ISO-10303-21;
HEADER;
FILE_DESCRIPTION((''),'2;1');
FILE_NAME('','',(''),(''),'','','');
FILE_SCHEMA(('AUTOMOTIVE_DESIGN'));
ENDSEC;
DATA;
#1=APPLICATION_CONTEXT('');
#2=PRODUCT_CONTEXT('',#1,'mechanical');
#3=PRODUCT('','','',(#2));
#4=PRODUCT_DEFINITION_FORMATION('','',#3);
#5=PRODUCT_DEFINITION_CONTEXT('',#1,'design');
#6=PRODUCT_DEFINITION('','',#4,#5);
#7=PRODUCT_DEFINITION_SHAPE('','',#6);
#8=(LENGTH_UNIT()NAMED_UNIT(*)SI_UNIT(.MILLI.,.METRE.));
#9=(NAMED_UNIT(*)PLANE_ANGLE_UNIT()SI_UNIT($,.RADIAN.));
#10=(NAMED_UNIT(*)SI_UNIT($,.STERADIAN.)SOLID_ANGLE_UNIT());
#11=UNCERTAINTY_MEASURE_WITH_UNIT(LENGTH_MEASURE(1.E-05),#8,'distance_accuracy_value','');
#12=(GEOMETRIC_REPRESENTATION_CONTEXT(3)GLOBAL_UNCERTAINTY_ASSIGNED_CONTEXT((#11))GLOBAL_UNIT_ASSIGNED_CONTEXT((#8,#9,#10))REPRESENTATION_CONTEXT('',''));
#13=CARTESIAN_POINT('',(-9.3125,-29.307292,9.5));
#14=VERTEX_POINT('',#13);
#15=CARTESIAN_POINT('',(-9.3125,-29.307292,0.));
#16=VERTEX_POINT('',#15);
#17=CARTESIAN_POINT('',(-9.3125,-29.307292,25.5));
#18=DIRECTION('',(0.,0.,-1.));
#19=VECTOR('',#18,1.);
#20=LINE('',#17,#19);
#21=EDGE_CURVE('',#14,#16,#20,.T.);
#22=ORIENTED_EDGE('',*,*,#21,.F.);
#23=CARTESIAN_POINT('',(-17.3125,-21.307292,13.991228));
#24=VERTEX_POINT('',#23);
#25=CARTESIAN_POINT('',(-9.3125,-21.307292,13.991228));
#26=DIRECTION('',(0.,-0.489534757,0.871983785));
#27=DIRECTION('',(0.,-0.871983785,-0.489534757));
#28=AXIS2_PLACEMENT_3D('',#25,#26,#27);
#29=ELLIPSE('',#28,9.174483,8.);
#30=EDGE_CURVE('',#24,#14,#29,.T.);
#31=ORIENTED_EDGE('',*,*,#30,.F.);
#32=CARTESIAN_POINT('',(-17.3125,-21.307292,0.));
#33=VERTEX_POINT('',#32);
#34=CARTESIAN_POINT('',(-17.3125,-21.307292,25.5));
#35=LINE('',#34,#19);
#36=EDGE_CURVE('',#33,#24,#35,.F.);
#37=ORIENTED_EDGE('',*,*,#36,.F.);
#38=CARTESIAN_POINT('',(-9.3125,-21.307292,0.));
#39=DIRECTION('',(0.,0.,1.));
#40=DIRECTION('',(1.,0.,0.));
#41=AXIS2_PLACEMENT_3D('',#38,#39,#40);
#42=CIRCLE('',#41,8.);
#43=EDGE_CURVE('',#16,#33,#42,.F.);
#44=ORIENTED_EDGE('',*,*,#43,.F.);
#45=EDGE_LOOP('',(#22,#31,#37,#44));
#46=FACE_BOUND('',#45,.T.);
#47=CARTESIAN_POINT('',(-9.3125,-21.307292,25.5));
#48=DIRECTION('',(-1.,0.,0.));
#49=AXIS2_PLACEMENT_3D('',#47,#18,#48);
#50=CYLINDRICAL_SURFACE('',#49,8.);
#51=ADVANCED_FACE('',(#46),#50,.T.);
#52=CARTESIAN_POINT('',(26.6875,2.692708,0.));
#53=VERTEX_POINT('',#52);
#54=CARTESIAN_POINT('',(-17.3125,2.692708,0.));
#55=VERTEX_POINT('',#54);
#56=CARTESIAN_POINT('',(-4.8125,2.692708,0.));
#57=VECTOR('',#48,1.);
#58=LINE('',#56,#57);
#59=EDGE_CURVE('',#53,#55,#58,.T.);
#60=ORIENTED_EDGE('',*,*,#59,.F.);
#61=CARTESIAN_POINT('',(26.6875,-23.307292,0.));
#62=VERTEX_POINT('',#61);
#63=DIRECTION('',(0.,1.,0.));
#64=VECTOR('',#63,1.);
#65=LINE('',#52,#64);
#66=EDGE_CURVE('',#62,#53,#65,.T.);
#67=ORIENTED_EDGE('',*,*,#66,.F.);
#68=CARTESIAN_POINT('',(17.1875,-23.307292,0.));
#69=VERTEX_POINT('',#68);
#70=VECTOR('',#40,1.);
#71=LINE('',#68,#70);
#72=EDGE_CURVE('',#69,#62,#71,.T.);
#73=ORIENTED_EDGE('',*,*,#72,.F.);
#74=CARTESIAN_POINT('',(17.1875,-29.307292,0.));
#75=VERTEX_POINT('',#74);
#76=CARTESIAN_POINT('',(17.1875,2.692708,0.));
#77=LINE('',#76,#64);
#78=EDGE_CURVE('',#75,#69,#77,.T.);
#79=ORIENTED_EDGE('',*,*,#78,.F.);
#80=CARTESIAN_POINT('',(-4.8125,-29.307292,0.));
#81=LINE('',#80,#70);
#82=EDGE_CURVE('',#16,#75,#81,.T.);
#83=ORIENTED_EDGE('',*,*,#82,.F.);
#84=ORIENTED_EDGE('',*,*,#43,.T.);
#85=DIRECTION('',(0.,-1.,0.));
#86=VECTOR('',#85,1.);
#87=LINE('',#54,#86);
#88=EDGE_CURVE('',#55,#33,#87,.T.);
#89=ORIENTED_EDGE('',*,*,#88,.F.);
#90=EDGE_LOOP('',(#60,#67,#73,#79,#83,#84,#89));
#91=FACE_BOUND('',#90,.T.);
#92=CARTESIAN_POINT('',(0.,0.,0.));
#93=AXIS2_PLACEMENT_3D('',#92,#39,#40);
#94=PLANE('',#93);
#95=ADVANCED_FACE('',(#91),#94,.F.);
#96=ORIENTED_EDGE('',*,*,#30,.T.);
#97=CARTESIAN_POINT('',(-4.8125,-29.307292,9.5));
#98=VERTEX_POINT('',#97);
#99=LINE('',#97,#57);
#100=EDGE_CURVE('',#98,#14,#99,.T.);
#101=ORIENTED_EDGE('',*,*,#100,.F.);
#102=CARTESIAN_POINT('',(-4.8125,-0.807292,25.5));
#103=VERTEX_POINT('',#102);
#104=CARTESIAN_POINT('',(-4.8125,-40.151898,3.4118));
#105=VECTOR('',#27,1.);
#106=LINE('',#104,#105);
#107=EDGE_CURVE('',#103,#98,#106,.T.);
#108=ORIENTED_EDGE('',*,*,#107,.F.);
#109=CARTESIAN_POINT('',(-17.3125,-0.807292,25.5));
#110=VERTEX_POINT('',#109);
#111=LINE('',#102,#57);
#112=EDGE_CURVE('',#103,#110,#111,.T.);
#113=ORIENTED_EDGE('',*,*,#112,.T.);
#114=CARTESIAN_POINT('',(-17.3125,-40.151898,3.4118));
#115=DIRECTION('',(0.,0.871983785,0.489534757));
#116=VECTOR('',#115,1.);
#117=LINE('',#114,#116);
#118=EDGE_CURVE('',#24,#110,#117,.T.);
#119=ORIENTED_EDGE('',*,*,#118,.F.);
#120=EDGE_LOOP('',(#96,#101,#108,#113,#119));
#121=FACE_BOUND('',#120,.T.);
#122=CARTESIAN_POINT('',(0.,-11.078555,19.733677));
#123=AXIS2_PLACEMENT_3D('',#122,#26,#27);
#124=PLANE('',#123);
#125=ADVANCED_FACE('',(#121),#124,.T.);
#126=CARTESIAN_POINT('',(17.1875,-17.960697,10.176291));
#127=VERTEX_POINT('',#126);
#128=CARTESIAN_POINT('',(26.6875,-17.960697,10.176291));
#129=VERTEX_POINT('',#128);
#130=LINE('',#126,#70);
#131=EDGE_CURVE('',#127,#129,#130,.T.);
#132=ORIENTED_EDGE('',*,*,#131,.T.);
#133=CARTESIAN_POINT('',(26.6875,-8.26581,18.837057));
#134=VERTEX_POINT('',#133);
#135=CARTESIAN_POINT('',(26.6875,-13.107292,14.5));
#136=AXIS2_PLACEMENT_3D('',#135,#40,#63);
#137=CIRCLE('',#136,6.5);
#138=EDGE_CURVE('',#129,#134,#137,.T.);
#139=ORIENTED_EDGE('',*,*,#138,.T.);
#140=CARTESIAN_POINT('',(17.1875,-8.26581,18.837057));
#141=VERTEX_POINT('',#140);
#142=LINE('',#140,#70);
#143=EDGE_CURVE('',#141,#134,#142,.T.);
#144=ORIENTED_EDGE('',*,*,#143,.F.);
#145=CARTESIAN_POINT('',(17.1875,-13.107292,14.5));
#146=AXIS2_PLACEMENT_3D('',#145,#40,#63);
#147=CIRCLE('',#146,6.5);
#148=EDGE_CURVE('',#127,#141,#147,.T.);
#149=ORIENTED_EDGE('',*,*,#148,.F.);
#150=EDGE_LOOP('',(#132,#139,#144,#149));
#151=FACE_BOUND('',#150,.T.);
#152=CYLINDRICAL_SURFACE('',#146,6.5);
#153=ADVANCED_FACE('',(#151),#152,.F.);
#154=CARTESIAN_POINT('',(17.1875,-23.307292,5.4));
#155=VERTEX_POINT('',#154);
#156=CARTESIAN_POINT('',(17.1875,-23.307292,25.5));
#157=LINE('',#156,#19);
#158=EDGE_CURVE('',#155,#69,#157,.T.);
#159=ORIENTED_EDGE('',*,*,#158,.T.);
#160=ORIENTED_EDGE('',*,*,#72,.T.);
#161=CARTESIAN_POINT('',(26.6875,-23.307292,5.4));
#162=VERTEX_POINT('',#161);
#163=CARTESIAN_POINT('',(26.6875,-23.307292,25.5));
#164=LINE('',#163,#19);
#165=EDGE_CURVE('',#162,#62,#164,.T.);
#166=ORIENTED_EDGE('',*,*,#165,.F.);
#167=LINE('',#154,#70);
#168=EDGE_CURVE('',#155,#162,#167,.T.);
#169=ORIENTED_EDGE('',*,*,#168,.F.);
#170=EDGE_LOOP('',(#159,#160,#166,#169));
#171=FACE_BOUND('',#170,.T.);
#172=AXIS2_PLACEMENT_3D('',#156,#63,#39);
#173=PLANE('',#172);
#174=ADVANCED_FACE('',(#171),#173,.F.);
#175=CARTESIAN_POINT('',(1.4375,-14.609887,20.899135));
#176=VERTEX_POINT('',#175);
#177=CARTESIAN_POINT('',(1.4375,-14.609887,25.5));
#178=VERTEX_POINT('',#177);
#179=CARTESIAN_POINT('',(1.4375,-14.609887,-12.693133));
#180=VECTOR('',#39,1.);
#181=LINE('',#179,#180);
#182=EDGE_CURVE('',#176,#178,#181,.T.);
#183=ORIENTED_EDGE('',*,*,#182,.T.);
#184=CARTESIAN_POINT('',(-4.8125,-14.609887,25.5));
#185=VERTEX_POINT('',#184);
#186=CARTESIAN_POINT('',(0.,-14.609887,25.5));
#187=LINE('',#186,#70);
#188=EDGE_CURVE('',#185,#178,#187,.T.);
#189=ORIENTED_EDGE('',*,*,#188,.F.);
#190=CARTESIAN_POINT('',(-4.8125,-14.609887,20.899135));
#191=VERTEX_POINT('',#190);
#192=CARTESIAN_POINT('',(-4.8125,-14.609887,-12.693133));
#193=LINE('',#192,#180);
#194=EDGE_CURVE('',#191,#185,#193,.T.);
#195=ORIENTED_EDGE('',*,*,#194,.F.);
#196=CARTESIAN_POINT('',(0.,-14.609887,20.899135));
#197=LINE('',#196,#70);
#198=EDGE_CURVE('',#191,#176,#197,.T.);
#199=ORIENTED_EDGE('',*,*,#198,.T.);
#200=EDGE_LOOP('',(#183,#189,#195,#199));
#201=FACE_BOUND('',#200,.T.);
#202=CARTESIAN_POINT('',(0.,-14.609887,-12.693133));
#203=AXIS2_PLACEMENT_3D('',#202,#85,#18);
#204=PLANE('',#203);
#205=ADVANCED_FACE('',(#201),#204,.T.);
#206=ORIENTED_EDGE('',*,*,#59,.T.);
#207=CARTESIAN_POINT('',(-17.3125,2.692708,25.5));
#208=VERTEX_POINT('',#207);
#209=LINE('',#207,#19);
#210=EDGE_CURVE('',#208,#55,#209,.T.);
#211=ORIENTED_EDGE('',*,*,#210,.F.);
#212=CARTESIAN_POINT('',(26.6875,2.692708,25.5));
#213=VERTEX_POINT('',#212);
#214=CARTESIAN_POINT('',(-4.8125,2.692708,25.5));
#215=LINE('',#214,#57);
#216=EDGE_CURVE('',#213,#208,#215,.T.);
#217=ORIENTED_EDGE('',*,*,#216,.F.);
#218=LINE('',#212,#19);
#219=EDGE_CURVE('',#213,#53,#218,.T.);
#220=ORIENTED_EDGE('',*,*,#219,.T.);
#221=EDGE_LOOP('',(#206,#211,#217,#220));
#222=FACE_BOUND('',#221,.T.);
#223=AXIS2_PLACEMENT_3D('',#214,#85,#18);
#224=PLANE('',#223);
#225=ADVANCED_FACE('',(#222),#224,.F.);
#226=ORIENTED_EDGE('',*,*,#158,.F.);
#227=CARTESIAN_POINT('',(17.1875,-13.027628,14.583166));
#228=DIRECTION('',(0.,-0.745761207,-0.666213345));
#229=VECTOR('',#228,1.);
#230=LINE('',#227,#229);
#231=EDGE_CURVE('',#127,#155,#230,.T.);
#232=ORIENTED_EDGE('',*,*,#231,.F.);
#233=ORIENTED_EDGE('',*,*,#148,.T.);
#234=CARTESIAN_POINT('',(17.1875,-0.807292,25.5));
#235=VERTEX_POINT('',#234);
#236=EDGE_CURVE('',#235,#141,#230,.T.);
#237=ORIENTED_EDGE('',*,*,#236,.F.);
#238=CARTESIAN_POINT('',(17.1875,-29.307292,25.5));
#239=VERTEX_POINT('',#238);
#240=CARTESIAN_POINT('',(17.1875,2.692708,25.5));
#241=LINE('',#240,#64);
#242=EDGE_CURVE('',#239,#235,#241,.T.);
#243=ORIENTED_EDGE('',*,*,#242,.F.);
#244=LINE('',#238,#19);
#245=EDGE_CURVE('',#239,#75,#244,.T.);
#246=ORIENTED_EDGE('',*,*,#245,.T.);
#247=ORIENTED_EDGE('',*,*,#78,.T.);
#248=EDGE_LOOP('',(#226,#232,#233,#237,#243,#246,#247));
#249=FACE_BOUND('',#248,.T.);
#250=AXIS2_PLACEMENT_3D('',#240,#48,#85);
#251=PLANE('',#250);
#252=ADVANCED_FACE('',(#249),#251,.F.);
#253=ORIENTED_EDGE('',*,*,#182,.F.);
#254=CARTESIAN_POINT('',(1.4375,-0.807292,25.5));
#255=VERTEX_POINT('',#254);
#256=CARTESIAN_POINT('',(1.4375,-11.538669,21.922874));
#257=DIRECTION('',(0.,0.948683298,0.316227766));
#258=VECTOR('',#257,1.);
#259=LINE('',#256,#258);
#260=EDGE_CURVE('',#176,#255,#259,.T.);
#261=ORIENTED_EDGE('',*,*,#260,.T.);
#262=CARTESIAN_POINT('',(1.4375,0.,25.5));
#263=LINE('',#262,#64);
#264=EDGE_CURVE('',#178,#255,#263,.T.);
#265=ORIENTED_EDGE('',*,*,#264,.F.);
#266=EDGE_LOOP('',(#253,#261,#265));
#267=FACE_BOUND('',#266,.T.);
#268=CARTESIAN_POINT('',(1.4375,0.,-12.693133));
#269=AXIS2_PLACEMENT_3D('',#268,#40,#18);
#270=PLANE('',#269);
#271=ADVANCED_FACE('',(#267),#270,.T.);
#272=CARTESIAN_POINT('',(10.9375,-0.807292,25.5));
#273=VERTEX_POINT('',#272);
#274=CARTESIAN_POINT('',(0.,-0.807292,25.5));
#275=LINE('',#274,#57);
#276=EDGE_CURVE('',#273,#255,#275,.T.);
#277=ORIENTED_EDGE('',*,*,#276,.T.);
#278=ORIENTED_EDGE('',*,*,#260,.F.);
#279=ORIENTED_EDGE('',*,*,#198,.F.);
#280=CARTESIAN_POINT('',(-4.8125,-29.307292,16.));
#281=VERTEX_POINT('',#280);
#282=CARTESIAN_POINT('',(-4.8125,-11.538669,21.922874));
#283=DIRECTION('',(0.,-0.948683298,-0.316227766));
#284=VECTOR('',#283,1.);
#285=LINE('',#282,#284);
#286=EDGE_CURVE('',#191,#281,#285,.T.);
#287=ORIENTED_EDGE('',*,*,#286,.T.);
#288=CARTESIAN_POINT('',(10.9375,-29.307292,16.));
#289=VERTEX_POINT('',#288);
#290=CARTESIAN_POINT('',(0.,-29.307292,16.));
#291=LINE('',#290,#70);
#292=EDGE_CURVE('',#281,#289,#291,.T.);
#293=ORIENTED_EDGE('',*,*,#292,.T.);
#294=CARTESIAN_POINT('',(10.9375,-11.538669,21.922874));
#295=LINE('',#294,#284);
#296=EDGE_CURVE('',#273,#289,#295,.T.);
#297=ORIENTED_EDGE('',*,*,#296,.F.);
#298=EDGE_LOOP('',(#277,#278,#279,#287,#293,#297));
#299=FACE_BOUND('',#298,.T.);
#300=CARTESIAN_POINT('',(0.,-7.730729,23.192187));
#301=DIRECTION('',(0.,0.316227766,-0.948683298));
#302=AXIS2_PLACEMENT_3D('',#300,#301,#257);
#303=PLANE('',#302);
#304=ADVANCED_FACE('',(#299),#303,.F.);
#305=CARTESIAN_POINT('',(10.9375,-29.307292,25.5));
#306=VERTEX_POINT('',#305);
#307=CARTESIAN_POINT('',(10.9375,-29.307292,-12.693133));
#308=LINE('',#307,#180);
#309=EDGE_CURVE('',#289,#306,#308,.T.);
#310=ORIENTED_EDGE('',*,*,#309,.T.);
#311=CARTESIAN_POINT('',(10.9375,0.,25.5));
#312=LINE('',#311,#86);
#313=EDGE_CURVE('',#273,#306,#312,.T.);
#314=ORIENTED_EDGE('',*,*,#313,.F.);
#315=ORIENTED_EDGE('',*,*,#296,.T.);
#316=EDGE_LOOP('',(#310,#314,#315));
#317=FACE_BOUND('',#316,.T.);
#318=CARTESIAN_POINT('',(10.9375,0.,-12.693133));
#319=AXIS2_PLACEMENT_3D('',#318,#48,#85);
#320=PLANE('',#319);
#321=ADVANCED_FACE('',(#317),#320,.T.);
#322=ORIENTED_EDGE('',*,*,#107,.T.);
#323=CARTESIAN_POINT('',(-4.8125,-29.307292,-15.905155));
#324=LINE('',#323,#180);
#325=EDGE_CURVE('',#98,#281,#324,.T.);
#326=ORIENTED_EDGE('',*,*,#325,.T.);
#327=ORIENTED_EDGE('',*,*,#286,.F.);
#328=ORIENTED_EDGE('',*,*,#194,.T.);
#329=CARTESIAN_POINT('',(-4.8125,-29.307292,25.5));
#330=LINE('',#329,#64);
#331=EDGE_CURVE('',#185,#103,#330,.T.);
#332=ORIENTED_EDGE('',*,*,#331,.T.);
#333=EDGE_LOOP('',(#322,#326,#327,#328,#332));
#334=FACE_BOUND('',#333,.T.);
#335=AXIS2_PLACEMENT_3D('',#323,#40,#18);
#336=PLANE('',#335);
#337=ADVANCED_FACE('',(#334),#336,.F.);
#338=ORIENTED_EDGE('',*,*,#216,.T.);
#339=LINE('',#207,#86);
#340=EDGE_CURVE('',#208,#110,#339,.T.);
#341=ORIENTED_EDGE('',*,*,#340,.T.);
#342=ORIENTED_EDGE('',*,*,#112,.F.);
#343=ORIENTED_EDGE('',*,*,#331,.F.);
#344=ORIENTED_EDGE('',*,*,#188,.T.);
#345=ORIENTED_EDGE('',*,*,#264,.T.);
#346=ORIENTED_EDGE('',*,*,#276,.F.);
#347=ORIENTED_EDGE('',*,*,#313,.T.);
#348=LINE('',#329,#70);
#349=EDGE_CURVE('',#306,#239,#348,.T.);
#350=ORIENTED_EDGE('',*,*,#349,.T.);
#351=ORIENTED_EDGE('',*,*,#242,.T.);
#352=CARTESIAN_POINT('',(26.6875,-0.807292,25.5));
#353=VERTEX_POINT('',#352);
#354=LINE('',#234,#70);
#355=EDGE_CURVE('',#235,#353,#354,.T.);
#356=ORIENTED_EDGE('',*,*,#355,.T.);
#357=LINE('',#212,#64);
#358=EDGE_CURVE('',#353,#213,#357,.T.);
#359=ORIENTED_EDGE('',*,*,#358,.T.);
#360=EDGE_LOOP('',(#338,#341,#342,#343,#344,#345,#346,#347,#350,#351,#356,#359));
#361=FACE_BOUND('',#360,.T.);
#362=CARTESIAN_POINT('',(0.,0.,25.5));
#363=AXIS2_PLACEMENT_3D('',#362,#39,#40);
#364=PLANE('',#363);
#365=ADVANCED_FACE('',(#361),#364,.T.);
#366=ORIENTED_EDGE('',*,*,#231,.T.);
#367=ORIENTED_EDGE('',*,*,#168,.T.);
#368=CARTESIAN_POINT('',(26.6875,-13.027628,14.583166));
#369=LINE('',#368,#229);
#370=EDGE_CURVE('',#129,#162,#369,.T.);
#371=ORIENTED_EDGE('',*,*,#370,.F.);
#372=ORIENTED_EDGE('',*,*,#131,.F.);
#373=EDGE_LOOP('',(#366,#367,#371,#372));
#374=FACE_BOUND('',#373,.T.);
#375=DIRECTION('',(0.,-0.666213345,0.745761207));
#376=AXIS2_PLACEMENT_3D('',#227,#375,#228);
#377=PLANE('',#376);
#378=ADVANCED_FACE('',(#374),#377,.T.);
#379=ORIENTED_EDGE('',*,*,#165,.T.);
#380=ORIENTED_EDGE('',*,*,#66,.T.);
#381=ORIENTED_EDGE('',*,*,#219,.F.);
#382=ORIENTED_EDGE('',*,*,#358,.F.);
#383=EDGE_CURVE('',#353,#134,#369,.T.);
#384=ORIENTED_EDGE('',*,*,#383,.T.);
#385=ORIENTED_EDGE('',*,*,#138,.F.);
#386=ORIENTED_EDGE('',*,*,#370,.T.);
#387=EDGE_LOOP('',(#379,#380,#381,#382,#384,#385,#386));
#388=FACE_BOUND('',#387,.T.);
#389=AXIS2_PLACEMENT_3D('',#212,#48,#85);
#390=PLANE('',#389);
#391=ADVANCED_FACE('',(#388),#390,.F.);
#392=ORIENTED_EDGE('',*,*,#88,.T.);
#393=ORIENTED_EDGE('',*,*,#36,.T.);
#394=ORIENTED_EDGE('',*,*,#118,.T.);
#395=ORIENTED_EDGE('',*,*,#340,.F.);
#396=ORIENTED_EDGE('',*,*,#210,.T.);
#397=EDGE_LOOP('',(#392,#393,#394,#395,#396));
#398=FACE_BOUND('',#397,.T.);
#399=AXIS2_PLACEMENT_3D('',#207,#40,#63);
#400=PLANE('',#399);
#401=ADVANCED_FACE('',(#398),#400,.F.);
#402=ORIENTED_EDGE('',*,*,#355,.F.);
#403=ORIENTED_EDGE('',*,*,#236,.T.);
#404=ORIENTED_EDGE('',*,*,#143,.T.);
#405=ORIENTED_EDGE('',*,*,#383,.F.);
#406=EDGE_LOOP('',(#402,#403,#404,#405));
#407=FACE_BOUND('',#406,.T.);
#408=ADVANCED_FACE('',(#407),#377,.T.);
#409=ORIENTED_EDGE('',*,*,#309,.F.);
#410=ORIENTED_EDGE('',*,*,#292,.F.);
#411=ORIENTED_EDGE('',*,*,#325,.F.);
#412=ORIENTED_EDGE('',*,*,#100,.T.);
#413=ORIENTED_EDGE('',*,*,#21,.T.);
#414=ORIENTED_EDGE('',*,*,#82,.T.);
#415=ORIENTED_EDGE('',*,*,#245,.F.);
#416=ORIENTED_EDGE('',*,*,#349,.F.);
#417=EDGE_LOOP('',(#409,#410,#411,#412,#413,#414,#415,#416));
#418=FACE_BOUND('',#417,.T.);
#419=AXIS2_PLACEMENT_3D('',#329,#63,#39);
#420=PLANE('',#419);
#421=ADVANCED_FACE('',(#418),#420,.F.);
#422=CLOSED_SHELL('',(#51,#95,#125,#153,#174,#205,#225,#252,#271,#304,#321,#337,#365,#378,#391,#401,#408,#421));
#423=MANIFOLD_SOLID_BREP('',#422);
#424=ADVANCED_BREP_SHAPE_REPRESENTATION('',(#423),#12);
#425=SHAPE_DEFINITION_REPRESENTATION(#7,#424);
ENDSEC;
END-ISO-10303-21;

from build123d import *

# Parameters (mm, degrees)
SKETCH1_W            = 22
SKETCH1_H            = 32
BOSS_EXTRUDE1_DEPTH  = 25.5
CUT_EXTRUDE1_START   = -4.8125
CUT_EXTRUDE1_DEPTH   = 15.75
CUT_EXTRUDE1_START_2 = 1.4375
CUT_EXTRUDE1_2_DEPTH = 9.5
SKETCH8_W            = 9.5
SKETCH8_H            = 26
BOSS_EXTRUDE2_DEPTH  = 25.5
CUT_EXTRUDE2_DEPTH   = 9.5
SKETCH10_W           = 12.5
SKETCH10_H           = 32
BOSS_EXTRUDE3_DEPTH  = 25.5
CUT_EXTRUDE3_START   = -17.3125
CUT_EXTRUDE3_DEPTH   = 12.5
FILLET1_R            = 8


# Read off the part's stored shape, not the designer's step: Cut-Extrude1, Cut-Extrude3
with BuildPart() as part:
    # Sketch1 → Boss-Extrude1 (new body)
    with BuildSketch(Plane.XY):
        with Locations((6.1875, -13.307291667)):
            Rectangle(SKETCH1_W, SKETCH1_H)
    extrude(amount=BOSS_EXTRUDE1_DEPTH)

    # Cut-Extrude1 outline → Cut-Extrude1 (cut)
    with BuildSketch(Plane.YZ.offset(CUT_EXTRUDE1_START)):
        Polygon((-29.307291667, 25.5), (-29.307291667, 16), (-14.609886779, 20.899134963), (-14.609886779, 25.5), align=None)
    extrude(amount=CUT_EXTRUDE1_DEPTH, mode=Mode.SUBTRACT)

    # Cut-Extrude1 2 outline → Cut-Extrude1 2 (cut)
    with BuildSketch(Plane.YZ.offset(CUT_EXTRUDE1_START_2)):
        Polygon((-14.609886779, 25.5), (-14.609886779, 20.899134963), (-0.807291667, 25.5), align=None)
    extrude(amount=CUT_EXTRUDE1_2_DEPTH, mode=Mode.SUBTRACT)

    # Sketch8 → Boss-Extrude2 (add)
    with BuildSketch(Plane.XY):
        with Locations((21.9375, -10.307291667)):
            Rectangle(SKETCH8_W, SKETCH8_H)
    extrude(amount=BOSS_EXTRUDE2_DEPTH)

    # Sketch9 → Cut-Extrude2 (cut)
    with BuildSketch(Plane(origin=(26.6875, 0, 0), x_dir=(0, 0, -1), z_dir=(1, 0, 0))):
        with BuildLine():
            Line((-18.837056558, -8.265810445), (-25.5, -0.807291667))
            Line((-25.5, -0.807291667), (-25.5, -23.307291667))
            Line((-25.5, -23.307291667), (-5.4, -23.307291667))
            Line((-5.4, -23.307291667), (-10.176291277, -17.960696954))
            ThreePointArc((-10.176291277, -17.960696954), (-19.347447848, -17.437678411), (-18.837056558, -8.265810445))
        make_face()
        with BuildLine():
            ThreePointArc((-8, -13.107291667), (-11.848667092, -7.172611068), (-18.837056558, -8.265810445))
            Line((-18.837056558, -8.265810445), (-10.176291277, -17.960696954))
            ThreePointArc((-10.176291277, -17.960696954), (-8.568975354, -15.76679287), (-8, -13.107291667))
        make_face()
        with BuildLine():
            Line((-10.176291277, -17.960696954), (-18.837056558, -8.265810445))
            ThreePointArc((-18.837056558, -8.265810445), (-19.347447848, -17.437678411), (-10.176291277, -17.960696954))
        make_face()
    extrude(amount=-CUT_EXTRUDE2_DEPTH, mode=Mode.SUBTRACT)

    # Sketch10 → Boss-Extrude3 (add)
    with BuildSketch(Plane.XY):
        with Locations((-11.0625, -13.307291667)):
            Rectangle(SKETCH10_W, SKETCH10_H)
    extrude(amount=BOSS_EXTRUDE3_DEPTH)

    # Cut-Extrude3 outline → Cut-Extrude3 (cut)
    with BuildSketch(Plane.YZ.offset(CUT_EXTRUDE3_START)):
        Polygon((-29.307291667, 9.5), (-0.807291667, 25.5), (-29.307291667, 25.5), align=None)
    extrude(amount=CUT_EXTRUDE3_DEPTH, mode=Mode.SUBTRACT)

    # Fillet1
    fillet1_edges = [part.edges().sort_by_distance(p)[0] for p in [
        (-17.3125, -29.307291667, 4.75),
    ]]
    fillet(fillet1_edges, radius=FILLET1_R)


solid = part.part
